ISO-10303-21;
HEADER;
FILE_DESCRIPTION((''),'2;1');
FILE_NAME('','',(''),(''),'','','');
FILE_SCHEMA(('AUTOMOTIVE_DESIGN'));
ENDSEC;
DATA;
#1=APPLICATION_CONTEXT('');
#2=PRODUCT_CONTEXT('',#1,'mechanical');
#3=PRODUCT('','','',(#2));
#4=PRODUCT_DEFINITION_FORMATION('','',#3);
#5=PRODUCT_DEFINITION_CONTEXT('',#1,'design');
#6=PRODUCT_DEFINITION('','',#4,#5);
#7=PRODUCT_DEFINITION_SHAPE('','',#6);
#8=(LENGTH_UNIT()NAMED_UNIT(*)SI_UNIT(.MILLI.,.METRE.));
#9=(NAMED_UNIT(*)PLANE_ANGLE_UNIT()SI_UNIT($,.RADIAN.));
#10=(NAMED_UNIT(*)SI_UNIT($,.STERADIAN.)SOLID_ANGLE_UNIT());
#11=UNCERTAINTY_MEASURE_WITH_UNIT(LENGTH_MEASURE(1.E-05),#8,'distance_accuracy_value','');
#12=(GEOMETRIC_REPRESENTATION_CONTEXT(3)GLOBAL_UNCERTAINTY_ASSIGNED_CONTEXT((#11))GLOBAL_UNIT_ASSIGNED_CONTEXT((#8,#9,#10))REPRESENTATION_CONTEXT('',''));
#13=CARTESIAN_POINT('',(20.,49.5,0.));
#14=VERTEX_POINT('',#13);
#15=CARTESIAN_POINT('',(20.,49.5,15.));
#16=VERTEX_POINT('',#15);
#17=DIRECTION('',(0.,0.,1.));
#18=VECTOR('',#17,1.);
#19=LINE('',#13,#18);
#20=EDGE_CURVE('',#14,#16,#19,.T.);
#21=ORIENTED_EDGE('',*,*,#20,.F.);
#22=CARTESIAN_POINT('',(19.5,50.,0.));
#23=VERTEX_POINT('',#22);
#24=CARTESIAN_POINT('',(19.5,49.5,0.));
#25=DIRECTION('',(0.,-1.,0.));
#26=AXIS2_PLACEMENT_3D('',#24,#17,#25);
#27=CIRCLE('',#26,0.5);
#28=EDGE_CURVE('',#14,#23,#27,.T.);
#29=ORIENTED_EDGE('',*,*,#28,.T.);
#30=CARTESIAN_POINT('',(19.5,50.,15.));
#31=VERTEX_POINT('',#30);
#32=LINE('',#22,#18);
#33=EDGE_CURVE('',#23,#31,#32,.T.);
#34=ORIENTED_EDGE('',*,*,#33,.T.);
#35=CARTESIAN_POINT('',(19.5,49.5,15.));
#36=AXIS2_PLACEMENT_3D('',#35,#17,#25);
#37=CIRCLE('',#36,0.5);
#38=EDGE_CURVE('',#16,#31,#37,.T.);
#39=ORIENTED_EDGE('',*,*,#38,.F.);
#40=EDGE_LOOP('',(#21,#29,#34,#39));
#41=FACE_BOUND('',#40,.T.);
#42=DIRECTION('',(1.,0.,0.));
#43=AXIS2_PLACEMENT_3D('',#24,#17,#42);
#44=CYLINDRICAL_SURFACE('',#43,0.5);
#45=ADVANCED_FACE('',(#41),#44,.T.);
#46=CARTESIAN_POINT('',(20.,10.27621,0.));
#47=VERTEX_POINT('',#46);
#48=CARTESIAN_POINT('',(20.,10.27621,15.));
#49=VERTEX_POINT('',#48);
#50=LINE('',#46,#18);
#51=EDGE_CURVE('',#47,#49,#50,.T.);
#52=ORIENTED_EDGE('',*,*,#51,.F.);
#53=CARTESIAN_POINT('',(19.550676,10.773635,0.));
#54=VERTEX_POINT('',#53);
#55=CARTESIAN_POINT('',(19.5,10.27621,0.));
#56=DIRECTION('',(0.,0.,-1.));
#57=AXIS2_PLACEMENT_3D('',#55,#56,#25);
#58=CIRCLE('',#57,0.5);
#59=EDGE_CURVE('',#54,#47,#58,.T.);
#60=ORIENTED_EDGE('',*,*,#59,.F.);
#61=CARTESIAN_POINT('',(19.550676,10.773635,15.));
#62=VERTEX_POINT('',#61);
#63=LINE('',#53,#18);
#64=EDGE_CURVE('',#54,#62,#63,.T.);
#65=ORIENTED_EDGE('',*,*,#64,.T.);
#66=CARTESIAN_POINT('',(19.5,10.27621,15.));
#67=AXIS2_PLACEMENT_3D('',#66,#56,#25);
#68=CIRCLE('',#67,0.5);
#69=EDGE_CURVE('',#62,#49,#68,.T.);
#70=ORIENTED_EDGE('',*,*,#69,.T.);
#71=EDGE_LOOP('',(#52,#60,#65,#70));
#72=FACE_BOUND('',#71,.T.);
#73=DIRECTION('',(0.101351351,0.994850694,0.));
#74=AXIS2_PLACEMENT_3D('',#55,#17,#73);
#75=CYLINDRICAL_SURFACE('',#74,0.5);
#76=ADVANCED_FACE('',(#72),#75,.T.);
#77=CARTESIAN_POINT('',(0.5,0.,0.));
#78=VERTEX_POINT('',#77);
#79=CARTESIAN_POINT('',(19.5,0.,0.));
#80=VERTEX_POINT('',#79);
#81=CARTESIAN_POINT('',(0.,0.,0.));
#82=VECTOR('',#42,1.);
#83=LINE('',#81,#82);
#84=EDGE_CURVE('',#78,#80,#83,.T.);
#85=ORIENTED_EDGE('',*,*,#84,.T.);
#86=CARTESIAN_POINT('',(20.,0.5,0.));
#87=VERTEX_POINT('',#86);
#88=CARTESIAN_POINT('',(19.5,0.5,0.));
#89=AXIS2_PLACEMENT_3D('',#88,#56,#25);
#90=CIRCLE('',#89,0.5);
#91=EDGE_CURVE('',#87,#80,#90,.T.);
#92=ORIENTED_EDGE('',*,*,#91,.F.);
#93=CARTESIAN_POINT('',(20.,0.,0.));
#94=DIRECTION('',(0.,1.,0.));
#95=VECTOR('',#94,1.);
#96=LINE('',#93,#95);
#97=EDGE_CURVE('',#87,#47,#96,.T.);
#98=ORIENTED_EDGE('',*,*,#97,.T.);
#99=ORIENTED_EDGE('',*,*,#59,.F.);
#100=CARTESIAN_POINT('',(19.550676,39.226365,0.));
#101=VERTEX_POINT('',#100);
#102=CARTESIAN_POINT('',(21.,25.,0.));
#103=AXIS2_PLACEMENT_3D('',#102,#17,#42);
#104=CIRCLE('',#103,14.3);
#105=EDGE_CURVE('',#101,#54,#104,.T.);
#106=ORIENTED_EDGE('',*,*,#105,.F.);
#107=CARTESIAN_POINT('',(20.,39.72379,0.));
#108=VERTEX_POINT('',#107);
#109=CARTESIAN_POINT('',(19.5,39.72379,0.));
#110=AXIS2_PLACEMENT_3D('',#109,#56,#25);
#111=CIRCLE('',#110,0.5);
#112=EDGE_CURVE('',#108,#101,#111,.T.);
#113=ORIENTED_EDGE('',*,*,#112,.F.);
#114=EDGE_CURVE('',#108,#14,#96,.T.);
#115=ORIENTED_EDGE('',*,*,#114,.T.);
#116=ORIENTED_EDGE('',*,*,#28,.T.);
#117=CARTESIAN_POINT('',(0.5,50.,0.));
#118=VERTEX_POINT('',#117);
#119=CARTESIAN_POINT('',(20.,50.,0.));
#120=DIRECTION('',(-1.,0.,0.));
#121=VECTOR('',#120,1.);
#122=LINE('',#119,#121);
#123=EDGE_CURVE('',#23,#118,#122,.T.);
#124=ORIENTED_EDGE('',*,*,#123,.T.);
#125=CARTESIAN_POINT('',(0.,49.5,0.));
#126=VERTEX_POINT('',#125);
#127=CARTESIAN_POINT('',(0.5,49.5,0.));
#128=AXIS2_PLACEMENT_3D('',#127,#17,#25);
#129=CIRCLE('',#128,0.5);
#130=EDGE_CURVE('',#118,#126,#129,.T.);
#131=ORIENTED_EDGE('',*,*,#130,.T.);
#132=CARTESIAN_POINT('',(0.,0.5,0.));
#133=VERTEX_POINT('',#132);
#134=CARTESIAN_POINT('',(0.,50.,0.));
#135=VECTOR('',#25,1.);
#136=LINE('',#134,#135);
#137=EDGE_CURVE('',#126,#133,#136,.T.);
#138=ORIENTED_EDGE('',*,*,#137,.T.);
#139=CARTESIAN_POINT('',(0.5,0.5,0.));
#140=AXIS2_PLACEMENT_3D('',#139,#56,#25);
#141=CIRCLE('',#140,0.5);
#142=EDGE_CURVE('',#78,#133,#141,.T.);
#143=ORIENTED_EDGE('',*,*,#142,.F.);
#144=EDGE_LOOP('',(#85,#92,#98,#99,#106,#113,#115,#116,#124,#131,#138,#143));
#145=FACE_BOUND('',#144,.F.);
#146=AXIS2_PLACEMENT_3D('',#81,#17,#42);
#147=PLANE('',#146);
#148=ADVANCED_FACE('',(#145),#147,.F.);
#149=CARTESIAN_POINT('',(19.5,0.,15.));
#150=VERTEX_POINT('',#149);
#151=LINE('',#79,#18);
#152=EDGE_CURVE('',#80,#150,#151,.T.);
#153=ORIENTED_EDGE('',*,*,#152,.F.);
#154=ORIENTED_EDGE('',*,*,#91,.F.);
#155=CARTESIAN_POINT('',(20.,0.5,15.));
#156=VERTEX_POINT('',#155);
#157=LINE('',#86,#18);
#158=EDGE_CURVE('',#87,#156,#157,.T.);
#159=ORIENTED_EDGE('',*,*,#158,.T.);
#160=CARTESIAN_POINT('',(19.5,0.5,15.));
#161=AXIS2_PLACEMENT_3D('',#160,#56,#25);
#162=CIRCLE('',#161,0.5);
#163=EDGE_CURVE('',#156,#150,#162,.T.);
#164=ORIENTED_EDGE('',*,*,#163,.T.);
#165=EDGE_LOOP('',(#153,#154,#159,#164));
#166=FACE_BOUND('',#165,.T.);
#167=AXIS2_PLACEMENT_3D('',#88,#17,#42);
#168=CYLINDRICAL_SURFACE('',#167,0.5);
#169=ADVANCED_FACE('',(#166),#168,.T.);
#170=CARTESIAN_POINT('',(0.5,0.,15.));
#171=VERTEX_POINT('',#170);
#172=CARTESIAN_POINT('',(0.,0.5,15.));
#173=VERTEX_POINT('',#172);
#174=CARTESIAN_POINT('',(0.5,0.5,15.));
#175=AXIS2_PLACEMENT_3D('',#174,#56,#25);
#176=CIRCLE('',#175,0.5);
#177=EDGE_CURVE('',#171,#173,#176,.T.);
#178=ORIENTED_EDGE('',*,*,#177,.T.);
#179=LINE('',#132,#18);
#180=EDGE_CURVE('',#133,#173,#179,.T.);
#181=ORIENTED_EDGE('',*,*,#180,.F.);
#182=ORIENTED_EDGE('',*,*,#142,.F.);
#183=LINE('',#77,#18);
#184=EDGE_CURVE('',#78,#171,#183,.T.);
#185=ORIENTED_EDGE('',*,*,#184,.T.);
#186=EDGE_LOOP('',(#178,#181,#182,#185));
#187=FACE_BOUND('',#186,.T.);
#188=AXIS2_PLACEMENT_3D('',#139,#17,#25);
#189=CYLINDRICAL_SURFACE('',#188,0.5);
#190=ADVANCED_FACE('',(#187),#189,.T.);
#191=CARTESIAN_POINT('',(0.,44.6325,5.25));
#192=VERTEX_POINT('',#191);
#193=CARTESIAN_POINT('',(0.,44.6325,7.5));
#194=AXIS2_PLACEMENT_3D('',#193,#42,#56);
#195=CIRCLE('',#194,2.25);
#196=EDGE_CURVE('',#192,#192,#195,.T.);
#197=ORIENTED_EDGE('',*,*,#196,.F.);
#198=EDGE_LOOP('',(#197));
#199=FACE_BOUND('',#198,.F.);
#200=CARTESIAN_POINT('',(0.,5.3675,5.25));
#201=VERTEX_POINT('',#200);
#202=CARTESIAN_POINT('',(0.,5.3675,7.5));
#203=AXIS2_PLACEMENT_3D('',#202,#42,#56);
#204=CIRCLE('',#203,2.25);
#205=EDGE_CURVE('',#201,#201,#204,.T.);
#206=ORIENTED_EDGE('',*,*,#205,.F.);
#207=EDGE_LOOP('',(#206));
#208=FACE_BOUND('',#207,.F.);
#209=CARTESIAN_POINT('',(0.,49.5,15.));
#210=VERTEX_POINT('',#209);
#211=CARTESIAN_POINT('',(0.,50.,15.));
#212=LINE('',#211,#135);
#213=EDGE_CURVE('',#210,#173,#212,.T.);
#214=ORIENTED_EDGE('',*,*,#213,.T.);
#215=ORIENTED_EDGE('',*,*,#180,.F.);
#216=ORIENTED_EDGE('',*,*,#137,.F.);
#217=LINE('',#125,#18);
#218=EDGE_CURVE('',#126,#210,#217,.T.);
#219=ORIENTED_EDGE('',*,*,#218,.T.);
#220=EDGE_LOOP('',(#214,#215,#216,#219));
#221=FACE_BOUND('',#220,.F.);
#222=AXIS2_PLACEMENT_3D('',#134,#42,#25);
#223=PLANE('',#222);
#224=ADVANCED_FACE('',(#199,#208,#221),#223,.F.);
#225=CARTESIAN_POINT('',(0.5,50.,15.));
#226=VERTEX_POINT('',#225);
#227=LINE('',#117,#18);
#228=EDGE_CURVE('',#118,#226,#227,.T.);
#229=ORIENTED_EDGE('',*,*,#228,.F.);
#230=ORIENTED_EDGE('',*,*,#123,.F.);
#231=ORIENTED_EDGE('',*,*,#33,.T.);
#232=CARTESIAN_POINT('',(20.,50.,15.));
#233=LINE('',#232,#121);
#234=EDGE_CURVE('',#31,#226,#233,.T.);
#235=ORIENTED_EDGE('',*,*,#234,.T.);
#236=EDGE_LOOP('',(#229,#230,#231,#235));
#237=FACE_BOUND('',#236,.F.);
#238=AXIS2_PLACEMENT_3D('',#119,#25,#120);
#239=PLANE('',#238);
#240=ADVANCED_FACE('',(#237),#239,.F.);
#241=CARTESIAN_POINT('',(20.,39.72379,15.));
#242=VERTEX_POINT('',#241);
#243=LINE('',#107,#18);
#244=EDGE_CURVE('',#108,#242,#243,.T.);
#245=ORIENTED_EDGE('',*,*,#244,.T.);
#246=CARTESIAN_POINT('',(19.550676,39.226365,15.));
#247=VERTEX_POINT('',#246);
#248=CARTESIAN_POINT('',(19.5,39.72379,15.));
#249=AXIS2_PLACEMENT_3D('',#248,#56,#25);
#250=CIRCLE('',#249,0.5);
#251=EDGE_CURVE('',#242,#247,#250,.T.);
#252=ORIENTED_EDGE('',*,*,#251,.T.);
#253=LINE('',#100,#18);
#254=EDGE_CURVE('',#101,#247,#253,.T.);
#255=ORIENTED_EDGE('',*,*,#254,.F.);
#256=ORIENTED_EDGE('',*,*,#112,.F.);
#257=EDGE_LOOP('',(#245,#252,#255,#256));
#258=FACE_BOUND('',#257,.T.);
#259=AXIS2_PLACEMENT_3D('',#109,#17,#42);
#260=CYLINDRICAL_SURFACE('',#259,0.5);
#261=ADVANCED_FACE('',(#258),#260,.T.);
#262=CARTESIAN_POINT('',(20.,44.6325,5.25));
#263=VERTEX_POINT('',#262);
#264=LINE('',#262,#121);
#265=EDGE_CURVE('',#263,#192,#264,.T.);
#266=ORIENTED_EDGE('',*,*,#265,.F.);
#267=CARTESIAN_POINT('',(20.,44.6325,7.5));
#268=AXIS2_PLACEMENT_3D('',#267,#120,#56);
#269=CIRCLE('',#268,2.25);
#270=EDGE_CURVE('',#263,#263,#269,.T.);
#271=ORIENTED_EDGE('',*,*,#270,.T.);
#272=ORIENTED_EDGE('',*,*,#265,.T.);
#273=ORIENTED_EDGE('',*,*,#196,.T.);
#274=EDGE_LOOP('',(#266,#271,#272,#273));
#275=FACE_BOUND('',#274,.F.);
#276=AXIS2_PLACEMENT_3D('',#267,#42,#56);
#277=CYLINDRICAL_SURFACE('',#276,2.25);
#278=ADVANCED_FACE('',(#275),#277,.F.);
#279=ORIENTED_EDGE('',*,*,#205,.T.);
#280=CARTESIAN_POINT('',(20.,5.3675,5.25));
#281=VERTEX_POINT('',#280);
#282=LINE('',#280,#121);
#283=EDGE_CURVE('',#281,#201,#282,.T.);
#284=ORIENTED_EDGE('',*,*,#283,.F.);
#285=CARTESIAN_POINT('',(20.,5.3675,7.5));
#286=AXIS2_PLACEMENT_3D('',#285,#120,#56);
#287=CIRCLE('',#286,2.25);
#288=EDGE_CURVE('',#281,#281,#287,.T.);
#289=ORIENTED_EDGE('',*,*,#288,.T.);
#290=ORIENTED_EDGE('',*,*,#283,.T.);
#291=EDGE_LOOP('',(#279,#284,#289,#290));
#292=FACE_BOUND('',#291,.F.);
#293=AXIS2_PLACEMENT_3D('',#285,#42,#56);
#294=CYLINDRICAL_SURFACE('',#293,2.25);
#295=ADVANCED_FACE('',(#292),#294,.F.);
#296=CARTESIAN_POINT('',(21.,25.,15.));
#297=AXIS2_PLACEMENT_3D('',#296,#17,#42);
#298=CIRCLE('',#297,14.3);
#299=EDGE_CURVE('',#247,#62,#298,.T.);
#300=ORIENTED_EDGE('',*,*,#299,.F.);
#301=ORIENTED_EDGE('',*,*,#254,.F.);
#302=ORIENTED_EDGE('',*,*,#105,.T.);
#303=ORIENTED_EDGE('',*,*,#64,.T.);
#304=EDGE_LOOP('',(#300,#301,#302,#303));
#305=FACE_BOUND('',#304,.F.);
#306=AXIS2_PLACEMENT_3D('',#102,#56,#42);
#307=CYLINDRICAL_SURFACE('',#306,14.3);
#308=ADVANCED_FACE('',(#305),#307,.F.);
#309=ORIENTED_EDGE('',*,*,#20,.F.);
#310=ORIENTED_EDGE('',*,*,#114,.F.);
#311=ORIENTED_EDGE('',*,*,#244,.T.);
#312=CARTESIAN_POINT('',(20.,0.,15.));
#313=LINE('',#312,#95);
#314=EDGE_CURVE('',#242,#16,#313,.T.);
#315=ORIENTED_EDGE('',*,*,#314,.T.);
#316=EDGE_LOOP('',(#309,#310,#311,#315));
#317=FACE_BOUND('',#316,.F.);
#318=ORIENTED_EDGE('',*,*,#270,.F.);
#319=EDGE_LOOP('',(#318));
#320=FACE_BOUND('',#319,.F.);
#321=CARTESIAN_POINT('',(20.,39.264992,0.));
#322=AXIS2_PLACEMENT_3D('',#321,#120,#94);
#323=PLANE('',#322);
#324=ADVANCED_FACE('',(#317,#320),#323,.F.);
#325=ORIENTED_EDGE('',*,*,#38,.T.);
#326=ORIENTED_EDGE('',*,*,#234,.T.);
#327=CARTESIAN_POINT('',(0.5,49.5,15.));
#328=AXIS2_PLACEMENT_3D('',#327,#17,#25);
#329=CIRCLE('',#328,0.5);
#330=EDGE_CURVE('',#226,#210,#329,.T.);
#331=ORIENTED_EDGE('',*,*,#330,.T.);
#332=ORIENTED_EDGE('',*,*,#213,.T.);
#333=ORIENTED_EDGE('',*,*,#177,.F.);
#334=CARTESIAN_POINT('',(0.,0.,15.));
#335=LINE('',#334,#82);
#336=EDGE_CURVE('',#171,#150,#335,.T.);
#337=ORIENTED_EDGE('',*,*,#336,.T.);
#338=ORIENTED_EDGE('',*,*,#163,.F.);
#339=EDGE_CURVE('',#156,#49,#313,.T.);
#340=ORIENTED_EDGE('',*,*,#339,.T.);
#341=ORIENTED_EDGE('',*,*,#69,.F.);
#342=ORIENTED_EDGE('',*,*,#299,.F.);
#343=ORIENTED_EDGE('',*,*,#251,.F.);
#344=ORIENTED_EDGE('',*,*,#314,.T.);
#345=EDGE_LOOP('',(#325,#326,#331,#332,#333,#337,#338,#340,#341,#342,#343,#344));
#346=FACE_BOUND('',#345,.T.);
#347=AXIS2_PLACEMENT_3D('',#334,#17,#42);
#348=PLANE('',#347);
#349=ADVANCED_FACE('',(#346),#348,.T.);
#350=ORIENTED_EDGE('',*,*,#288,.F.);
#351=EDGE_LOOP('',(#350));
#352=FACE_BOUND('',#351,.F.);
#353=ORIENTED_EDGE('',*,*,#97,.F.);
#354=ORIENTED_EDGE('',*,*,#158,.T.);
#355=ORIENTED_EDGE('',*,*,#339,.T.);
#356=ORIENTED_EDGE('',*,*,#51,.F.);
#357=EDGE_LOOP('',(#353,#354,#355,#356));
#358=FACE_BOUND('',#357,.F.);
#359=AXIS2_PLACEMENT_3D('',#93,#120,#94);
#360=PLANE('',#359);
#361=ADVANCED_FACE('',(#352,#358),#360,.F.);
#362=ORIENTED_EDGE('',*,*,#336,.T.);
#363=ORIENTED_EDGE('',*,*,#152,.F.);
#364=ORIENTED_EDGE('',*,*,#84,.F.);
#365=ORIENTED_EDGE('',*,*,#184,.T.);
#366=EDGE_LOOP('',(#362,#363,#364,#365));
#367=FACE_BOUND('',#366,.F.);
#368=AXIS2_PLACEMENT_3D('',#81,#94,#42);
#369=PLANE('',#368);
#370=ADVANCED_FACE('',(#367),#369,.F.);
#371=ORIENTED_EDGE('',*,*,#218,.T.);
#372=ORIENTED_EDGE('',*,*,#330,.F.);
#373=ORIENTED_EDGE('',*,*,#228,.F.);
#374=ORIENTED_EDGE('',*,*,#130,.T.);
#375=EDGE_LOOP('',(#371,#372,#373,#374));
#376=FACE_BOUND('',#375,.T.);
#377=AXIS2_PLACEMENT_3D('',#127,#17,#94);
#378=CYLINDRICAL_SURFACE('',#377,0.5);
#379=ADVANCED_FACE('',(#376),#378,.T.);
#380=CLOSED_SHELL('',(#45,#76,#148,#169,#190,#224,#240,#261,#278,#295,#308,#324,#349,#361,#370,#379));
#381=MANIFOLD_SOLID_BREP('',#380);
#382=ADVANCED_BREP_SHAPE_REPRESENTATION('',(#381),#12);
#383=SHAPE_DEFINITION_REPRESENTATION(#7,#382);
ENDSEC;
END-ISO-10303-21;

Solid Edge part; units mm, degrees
sketch "Sketch1" plane through (0, 0, 0) normal (0, 0, 1) x (1, 0, 0)
  line L0 (0, 0) -> (20, 0)
  line L1 (20, 0) -> (20, 50)
  circle A0 centre (21, 25) radius 14.3
  line L2 (20, 50) -> (0, 50)
  line L3 (0, 50) -> (0, 0)
extrude "Protrusion1" add sketch "Sketch1" along normal blind 15
hole "Bohrung_1" at (20, 5.3675, 7.5) direction (-1, 0, 0) diameter 4.5 end through all
hole "Hole1" at (20, 44.6325, 7.5) direction (-1, 0, 0) diameter 4.5 end through all
fillet "Verrundung_2" radius 0.5 6 edges at (0, 50, 7.5) (0, 0, 7.5) (20, 0, 7.5) (20, 10.735, 7.5) (20, 39.265, 7.5) (20, 50, 7.5)
